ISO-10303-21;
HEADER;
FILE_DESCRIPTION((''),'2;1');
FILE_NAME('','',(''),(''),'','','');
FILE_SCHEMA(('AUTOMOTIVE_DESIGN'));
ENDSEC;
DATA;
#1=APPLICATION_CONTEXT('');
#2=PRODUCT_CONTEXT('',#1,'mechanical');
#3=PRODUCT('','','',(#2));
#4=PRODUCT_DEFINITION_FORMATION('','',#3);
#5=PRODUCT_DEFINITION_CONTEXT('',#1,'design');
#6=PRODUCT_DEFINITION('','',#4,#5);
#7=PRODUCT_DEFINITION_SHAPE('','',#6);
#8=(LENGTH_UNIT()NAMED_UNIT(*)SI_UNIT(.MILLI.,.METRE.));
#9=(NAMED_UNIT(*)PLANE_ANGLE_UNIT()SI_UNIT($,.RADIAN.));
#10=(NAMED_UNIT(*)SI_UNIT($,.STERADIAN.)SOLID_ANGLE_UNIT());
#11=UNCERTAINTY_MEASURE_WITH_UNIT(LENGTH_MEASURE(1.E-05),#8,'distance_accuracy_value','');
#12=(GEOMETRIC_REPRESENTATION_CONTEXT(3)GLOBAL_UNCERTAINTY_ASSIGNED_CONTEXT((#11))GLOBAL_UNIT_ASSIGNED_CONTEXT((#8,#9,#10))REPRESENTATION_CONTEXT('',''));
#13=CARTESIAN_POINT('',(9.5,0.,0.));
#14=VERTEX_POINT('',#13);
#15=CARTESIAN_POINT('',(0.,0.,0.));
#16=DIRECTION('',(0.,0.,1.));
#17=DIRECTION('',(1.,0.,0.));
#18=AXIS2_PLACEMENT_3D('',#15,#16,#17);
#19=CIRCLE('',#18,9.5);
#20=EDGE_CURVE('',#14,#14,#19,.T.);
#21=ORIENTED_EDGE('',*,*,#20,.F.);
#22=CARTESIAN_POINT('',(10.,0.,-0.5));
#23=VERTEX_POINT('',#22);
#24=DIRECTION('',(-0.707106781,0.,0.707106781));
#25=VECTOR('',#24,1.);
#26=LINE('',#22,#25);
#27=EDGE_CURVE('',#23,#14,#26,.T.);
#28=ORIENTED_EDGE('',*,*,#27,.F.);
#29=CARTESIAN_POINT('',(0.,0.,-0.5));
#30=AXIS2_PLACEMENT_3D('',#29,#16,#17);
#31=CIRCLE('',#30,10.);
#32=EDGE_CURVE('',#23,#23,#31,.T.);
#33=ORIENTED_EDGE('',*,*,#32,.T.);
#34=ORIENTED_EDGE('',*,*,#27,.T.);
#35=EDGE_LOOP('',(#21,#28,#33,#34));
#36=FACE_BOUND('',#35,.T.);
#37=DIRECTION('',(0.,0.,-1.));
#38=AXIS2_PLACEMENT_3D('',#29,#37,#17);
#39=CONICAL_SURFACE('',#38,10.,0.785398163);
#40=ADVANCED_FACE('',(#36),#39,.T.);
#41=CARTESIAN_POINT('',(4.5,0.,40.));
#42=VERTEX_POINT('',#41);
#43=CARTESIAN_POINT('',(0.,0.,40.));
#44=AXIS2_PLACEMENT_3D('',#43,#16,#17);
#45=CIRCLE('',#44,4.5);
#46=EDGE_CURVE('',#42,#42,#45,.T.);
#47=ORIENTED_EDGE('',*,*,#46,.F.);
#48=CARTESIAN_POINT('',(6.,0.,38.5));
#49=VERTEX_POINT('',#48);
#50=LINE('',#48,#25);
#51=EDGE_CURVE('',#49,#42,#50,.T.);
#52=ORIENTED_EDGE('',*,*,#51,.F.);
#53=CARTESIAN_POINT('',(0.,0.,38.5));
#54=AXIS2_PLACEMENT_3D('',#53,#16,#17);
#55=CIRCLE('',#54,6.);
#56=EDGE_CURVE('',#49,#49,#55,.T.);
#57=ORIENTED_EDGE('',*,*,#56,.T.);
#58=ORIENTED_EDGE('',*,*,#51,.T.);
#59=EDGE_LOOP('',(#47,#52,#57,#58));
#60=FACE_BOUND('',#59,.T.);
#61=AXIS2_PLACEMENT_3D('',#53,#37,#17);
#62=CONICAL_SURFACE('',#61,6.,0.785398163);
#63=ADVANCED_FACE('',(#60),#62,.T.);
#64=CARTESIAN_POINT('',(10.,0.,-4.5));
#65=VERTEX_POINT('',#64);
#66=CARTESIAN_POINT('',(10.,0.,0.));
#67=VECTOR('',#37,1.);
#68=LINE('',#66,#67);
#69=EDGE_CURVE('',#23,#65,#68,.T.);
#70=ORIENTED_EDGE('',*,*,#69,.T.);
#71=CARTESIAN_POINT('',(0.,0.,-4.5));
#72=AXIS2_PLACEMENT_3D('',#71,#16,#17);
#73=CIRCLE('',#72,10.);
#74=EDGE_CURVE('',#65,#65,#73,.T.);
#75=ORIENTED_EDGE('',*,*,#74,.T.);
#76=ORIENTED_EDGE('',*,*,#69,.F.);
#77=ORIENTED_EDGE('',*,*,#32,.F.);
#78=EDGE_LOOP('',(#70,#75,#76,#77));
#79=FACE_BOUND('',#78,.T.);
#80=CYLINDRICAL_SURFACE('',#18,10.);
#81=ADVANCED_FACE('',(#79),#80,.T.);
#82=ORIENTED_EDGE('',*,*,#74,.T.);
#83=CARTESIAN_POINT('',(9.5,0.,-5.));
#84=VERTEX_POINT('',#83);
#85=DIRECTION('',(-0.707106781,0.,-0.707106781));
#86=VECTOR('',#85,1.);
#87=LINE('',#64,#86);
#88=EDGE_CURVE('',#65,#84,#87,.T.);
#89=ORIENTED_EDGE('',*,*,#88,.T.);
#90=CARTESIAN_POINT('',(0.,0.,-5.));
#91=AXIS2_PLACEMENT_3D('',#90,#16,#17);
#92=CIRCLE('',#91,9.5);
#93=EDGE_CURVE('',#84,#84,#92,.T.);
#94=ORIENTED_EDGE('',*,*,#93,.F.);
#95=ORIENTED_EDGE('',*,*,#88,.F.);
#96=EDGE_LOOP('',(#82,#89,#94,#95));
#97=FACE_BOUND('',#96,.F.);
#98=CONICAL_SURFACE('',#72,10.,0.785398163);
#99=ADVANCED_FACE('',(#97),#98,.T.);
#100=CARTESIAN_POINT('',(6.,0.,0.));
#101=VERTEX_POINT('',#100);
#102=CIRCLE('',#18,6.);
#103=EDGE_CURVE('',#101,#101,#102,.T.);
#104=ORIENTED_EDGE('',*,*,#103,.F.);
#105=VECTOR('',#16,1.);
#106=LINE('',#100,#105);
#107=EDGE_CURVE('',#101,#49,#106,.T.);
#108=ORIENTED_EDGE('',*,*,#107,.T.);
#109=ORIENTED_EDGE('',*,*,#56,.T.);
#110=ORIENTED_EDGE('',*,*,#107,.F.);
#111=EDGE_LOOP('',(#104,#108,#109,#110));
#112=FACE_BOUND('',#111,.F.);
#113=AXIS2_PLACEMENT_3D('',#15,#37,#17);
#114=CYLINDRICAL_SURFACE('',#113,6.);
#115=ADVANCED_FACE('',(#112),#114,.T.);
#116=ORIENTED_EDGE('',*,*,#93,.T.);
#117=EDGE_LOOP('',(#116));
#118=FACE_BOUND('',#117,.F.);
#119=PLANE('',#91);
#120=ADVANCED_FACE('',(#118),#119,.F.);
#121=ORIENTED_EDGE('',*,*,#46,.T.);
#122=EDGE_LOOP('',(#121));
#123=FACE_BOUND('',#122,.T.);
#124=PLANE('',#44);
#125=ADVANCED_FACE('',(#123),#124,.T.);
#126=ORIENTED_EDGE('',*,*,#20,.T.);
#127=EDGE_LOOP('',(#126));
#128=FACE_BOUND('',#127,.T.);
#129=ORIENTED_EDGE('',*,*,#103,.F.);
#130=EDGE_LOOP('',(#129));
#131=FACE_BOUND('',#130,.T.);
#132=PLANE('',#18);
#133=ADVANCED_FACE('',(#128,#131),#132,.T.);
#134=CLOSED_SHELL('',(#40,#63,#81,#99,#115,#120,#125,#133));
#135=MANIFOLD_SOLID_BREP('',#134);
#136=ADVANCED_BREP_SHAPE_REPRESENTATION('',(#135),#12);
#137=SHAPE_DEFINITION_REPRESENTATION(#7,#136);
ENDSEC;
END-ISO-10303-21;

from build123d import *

# Parameters (mm, degrees)
F1_R     = 6
F2_DEPTH = 40
F0_R     = 10
F3_DEPTH = 5
F4_SIZE  = 0.5
F5_SIZE  = 1.5


# Not quite as in the source:
# - the program builds the solid bodies; features that only make, move or delete a surface that nothing else refers to are left out


with BuildPart() as f2:
    # F1 (on face) → F2 (new body)
    with BuildSketch(Plane.XY):
        Circle(F1_R)
    extrude(amount=F2_DEPTH)

    # F0 (on Top) → F3 (join)
    with BuildSketch(Plane.XY):
        Circle(F0_R)
    extrude(amount=-F3_DEPTH)

    # F4
    f4_edges = [f2.edges().sort_by_distance(p)[0] for p in [
        (-10, 0, 0),
        (-10, 0, -5),
    ]]
    chamfer(f4_edges, length=F4_SIZE)

    # F5
    f5_edges = [f2.edges().sort_by_distance(p)[0] for p in [
        (-6, 0, 40),
    ]]
    chamfer(f5_edges, length=F5_SIZE)


solid = f2.part
